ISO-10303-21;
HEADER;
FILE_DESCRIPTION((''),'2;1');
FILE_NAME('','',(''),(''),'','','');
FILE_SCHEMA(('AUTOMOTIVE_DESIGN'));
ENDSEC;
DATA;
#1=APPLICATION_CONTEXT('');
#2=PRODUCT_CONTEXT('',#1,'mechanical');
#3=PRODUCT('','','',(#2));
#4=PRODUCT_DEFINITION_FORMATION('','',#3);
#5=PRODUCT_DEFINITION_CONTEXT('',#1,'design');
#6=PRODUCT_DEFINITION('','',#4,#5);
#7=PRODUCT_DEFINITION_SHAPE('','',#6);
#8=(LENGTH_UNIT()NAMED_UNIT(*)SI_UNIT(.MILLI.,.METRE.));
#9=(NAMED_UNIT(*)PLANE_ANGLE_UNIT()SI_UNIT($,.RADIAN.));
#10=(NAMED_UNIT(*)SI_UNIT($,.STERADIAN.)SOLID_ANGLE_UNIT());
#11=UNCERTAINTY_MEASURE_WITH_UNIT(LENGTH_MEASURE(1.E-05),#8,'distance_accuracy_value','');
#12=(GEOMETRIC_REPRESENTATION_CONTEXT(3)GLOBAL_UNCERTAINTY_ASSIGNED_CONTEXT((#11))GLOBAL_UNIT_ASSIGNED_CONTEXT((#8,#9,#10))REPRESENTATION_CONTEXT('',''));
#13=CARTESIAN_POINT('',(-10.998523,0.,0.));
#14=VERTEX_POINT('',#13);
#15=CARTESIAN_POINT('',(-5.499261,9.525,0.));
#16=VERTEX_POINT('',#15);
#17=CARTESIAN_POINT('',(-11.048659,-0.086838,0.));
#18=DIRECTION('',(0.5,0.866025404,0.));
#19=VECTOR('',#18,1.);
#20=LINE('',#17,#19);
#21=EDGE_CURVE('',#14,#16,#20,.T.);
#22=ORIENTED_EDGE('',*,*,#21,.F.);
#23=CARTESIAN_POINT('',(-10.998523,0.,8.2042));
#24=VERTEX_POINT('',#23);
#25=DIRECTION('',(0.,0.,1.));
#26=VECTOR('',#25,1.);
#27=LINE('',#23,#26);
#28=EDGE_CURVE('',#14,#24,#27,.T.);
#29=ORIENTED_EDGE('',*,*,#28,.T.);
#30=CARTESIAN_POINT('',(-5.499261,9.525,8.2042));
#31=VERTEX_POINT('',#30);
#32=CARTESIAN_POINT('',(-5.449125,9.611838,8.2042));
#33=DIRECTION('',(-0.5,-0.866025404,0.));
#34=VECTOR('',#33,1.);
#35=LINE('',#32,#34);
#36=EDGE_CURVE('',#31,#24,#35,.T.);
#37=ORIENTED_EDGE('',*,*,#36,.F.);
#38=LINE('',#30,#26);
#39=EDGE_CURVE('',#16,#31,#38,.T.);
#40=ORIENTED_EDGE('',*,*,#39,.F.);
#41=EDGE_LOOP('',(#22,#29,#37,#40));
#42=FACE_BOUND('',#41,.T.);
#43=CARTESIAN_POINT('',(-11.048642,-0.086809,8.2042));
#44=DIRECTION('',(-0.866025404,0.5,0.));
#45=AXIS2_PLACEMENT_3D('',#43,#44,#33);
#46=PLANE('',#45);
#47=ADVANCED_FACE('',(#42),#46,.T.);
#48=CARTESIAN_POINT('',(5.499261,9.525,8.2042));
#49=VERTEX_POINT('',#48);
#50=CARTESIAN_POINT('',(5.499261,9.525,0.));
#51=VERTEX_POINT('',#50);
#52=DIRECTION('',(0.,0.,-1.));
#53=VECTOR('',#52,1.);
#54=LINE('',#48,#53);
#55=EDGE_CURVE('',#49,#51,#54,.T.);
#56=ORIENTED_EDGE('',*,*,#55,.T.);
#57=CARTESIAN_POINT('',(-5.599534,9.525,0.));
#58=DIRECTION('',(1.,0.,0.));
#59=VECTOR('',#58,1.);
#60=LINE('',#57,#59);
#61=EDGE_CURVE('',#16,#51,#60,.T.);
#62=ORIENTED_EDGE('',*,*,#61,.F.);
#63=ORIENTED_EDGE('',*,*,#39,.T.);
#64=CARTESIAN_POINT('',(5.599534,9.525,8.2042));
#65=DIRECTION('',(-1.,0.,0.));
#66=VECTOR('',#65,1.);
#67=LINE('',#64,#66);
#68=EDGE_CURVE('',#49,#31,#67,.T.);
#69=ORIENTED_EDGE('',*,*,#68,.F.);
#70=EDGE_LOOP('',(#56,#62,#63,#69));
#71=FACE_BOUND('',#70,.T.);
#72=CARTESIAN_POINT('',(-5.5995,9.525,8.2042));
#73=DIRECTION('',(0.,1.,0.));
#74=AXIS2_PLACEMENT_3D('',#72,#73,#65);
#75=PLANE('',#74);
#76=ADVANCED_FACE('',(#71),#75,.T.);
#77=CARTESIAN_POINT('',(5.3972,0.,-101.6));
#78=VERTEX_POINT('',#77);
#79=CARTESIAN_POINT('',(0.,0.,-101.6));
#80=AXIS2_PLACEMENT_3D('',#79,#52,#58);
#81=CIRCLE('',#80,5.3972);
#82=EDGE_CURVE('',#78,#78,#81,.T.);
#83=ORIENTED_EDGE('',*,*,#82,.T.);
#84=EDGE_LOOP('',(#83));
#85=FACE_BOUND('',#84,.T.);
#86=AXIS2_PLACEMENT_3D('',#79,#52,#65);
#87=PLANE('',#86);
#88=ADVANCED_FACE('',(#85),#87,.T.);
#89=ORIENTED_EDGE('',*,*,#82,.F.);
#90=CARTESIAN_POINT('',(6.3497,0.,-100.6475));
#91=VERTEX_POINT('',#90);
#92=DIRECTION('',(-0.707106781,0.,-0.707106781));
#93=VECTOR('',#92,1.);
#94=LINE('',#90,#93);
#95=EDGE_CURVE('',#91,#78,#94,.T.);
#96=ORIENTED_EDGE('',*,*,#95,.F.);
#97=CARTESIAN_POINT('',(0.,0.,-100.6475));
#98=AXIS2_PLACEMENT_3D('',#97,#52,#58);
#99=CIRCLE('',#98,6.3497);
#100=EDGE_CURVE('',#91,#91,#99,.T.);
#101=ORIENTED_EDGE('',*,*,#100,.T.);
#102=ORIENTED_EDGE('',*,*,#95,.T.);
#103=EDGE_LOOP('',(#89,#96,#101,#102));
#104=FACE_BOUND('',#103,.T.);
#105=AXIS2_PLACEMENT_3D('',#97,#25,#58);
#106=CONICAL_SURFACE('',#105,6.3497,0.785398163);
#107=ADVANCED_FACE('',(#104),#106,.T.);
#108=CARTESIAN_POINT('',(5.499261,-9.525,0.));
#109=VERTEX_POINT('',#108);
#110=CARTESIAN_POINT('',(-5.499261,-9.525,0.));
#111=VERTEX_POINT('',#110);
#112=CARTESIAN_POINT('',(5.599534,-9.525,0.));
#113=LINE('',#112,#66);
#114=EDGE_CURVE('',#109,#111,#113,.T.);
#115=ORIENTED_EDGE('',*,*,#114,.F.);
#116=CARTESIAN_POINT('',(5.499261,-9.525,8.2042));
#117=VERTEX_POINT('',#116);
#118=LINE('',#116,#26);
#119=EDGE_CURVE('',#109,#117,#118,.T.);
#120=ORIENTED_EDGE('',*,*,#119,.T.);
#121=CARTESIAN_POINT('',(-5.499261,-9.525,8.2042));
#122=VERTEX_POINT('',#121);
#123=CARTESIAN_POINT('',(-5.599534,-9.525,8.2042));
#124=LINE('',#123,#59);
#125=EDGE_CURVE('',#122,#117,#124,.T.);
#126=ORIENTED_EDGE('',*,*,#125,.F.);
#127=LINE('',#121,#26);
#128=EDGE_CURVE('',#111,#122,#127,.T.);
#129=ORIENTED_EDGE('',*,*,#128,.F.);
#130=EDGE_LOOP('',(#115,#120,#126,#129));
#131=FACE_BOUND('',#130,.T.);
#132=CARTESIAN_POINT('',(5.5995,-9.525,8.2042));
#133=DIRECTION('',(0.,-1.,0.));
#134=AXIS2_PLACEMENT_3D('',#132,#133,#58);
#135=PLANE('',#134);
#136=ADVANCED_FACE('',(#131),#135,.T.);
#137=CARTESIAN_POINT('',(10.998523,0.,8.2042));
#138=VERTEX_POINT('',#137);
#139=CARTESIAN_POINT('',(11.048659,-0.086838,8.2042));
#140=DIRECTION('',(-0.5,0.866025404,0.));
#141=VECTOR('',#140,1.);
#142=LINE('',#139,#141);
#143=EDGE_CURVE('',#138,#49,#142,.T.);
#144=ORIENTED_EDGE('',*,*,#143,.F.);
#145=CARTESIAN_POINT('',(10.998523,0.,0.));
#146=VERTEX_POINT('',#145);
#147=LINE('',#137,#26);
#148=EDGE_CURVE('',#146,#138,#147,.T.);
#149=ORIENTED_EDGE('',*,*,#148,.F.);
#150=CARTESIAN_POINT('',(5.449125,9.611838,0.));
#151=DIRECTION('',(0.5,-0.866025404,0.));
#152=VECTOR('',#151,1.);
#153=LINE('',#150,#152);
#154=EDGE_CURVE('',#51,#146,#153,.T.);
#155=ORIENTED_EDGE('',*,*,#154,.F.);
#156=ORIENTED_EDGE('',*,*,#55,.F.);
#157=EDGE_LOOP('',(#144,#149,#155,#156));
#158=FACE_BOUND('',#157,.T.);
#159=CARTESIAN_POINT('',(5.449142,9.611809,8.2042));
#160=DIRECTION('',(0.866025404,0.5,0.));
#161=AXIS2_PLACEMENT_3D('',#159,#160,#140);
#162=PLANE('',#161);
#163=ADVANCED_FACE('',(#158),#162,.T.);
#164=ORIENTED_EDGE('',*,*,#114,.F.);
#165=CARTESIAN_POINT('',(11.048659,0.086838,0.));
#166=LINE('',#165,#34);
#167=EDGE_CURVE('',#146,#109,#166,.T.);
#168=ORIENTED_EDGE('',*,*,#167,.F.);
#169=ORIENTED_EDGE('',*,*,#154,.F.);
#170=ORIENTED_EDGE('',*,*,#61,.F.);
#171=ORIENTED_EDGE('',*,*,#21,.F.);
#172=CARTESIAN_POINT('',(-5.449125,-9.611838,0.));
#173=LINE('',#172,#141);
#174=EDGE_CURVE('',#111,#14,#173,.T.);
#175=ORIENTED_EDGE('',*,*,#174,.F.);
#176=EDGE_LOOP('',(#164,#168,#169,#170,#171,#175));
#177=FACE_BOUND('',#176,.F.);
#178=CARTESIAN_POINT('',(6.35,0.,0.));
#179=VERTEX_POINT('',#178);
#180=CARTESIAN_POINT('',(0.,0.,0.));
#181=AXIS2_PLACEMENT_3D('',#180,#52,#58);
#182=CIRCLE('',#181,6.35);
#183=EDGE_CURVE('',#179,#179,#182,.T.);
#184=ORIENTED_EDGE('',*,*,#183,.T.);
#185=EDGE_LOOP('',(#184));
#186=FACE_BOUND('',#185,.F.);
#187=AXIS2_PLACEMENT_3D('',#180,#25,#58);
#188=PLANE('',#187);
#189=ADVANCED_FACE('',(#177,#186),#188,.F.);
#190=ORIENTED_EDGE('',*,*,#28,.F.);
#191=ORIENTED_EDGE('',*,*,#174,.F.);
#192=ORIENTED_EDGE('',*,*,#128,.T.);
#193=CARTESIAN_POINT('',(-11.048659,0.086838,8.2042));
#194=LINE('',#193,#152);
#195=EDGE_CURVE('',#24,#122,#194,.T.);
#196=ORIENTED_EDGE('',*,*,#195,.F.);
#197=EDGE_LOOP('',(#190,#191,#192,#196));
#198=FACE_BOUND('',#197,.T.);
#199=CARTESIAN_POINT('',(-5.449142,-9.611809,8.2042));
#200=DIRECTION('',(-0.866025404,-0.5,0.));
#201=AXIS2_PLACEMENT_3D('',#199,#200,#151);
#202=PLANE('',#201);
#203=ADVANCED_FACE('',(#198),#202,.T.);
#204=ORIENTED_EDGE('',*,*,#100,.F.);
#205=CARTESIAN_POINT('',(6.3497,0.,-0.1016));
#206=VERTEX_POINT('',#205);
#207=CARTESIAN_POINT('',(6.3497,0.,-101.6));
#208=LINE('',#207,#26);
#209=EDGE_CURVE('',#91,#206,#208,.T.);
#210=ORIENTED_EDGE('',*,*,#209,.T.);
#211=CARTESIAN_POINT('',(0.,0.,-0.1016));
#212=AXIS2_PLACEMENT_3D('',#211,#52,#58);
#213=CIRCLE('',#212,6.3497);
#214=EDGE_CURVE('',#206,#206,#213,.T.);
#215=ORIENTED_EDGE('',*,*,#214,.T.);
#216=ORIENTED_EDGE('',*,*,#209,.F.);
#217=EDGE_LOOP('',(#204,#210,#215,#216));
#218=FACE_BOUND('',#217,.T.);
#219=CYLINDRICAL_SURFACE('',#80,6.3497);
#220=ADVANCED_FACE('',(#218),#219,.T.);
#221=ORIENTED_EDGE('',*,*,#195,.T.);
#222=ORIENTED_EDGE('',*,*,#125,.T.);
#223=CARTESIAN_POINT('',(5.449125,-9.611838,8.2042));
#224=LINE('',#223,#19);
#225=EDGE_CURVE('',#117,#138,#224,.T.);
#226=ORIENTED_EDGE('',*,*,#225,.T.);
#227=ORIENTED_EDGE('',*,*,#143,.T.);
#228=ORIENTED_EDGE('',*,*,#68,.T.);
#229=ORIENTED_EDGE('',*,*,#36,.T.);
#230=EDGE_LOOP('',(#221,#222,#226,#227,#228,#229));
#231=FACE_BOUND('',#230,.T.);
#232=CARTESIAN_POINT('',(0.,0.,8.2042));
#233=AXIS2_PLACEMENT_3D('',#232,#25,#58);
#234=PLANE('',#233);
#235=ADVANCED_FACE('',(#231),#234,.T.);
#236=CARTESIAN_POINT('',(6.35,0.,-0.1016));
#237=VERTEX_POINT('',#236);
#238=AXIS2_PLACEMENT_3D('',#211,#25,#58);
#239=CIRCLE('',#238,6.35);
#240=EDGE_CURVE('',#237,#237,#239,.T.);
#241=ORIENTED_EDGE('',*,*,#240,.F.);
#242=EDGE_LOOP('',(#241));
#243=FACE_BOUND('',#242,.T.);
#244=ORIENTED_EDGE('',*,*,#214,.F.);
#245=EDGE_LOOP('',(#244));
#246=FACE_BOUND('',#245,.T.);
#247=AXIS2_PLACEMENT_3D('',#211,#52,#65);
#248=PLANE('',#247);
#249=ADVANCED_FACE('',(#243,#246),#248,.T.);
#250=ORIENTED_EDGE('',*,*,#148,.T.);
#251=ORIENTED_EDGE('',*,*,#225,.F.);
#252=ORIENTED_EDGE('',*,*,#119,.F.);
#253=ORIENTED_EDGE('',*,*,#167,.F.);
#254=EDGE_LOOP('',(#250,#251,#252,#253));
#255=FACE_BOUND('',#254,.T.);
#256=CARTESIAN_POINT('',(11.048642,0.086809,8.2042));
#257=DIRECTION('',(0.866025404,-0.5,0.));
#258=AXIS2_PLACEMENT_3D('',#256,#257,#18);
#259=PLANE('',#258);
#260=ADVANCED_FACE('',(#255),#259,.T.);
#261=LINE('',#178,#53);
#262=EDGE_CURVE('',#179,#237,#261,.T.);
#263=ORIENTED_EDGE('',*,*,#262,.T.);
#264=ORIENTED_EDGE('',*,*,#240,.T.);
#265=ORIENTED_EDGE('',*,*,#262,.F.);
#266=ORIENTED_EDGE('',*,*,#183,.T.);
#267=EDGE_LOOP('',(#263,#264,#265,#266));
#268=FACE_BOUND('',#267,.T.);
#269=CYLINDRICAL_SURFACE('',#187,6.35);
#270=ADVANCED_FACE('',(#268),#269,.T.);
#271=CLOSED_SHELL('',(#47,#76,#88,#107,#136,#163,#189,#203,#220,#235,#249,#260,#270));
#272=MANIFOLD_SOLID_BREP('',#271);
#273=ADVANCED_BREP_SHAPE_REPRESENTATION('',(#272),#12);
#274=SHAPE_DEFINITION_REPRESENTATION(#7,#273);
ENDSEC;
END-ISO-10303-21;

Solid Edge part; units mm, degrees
sketch "Sketch1" plane through (0, 0, 0) normal (0, 0, 1) x (1, 0, 0)
  circle A0 centre (0, 0) radius 11.049
  dimension "D1" = 22.098
extrude "Protrusion1" add sketch "Sketch1" along normal blind 8.2042
sketch "Sketch2" plane through (0, 0, 0) normal (0, 0, -1) x (1, 0, 0)
  circle A0 centre (0, 0) radius 6.35
extrude "Protrusion2" add sketch "Sketch2" along normal blind 101.6
sketch "Sketch3" plane through (0, 0, -101.6) normal (0, 0, -1) x (1, 0, 0)
  circle A0 centre (0, 0) radius 6.3497
extrude "Cutout1" cut sketch "Sketch3" against normal blind 101.4984 flip side to cut
chamfer "Chamfer_1" distance 0.9525 angle 45 1 edges at (-6.3497, 0, -101.6)
sketch "Sketch4" plane through (0, 0, 8.2042) normal (0, 0, 1) x (1, 0, 0)
  line L0 (-5.5995, 9.525) -> (5.5995, 9.525)
  dimension "D1" = 19.05
extrude "Cutout2" cut sketch "Sketch4" against normal up to next material side at (0, 9.575, 8.2042)
pattern_circular "Pattern1" count 6 over 360 about axis through (0, 0, 8.2042) along (0, 0, 1) of "Cutout2"
properties part number "159698"
